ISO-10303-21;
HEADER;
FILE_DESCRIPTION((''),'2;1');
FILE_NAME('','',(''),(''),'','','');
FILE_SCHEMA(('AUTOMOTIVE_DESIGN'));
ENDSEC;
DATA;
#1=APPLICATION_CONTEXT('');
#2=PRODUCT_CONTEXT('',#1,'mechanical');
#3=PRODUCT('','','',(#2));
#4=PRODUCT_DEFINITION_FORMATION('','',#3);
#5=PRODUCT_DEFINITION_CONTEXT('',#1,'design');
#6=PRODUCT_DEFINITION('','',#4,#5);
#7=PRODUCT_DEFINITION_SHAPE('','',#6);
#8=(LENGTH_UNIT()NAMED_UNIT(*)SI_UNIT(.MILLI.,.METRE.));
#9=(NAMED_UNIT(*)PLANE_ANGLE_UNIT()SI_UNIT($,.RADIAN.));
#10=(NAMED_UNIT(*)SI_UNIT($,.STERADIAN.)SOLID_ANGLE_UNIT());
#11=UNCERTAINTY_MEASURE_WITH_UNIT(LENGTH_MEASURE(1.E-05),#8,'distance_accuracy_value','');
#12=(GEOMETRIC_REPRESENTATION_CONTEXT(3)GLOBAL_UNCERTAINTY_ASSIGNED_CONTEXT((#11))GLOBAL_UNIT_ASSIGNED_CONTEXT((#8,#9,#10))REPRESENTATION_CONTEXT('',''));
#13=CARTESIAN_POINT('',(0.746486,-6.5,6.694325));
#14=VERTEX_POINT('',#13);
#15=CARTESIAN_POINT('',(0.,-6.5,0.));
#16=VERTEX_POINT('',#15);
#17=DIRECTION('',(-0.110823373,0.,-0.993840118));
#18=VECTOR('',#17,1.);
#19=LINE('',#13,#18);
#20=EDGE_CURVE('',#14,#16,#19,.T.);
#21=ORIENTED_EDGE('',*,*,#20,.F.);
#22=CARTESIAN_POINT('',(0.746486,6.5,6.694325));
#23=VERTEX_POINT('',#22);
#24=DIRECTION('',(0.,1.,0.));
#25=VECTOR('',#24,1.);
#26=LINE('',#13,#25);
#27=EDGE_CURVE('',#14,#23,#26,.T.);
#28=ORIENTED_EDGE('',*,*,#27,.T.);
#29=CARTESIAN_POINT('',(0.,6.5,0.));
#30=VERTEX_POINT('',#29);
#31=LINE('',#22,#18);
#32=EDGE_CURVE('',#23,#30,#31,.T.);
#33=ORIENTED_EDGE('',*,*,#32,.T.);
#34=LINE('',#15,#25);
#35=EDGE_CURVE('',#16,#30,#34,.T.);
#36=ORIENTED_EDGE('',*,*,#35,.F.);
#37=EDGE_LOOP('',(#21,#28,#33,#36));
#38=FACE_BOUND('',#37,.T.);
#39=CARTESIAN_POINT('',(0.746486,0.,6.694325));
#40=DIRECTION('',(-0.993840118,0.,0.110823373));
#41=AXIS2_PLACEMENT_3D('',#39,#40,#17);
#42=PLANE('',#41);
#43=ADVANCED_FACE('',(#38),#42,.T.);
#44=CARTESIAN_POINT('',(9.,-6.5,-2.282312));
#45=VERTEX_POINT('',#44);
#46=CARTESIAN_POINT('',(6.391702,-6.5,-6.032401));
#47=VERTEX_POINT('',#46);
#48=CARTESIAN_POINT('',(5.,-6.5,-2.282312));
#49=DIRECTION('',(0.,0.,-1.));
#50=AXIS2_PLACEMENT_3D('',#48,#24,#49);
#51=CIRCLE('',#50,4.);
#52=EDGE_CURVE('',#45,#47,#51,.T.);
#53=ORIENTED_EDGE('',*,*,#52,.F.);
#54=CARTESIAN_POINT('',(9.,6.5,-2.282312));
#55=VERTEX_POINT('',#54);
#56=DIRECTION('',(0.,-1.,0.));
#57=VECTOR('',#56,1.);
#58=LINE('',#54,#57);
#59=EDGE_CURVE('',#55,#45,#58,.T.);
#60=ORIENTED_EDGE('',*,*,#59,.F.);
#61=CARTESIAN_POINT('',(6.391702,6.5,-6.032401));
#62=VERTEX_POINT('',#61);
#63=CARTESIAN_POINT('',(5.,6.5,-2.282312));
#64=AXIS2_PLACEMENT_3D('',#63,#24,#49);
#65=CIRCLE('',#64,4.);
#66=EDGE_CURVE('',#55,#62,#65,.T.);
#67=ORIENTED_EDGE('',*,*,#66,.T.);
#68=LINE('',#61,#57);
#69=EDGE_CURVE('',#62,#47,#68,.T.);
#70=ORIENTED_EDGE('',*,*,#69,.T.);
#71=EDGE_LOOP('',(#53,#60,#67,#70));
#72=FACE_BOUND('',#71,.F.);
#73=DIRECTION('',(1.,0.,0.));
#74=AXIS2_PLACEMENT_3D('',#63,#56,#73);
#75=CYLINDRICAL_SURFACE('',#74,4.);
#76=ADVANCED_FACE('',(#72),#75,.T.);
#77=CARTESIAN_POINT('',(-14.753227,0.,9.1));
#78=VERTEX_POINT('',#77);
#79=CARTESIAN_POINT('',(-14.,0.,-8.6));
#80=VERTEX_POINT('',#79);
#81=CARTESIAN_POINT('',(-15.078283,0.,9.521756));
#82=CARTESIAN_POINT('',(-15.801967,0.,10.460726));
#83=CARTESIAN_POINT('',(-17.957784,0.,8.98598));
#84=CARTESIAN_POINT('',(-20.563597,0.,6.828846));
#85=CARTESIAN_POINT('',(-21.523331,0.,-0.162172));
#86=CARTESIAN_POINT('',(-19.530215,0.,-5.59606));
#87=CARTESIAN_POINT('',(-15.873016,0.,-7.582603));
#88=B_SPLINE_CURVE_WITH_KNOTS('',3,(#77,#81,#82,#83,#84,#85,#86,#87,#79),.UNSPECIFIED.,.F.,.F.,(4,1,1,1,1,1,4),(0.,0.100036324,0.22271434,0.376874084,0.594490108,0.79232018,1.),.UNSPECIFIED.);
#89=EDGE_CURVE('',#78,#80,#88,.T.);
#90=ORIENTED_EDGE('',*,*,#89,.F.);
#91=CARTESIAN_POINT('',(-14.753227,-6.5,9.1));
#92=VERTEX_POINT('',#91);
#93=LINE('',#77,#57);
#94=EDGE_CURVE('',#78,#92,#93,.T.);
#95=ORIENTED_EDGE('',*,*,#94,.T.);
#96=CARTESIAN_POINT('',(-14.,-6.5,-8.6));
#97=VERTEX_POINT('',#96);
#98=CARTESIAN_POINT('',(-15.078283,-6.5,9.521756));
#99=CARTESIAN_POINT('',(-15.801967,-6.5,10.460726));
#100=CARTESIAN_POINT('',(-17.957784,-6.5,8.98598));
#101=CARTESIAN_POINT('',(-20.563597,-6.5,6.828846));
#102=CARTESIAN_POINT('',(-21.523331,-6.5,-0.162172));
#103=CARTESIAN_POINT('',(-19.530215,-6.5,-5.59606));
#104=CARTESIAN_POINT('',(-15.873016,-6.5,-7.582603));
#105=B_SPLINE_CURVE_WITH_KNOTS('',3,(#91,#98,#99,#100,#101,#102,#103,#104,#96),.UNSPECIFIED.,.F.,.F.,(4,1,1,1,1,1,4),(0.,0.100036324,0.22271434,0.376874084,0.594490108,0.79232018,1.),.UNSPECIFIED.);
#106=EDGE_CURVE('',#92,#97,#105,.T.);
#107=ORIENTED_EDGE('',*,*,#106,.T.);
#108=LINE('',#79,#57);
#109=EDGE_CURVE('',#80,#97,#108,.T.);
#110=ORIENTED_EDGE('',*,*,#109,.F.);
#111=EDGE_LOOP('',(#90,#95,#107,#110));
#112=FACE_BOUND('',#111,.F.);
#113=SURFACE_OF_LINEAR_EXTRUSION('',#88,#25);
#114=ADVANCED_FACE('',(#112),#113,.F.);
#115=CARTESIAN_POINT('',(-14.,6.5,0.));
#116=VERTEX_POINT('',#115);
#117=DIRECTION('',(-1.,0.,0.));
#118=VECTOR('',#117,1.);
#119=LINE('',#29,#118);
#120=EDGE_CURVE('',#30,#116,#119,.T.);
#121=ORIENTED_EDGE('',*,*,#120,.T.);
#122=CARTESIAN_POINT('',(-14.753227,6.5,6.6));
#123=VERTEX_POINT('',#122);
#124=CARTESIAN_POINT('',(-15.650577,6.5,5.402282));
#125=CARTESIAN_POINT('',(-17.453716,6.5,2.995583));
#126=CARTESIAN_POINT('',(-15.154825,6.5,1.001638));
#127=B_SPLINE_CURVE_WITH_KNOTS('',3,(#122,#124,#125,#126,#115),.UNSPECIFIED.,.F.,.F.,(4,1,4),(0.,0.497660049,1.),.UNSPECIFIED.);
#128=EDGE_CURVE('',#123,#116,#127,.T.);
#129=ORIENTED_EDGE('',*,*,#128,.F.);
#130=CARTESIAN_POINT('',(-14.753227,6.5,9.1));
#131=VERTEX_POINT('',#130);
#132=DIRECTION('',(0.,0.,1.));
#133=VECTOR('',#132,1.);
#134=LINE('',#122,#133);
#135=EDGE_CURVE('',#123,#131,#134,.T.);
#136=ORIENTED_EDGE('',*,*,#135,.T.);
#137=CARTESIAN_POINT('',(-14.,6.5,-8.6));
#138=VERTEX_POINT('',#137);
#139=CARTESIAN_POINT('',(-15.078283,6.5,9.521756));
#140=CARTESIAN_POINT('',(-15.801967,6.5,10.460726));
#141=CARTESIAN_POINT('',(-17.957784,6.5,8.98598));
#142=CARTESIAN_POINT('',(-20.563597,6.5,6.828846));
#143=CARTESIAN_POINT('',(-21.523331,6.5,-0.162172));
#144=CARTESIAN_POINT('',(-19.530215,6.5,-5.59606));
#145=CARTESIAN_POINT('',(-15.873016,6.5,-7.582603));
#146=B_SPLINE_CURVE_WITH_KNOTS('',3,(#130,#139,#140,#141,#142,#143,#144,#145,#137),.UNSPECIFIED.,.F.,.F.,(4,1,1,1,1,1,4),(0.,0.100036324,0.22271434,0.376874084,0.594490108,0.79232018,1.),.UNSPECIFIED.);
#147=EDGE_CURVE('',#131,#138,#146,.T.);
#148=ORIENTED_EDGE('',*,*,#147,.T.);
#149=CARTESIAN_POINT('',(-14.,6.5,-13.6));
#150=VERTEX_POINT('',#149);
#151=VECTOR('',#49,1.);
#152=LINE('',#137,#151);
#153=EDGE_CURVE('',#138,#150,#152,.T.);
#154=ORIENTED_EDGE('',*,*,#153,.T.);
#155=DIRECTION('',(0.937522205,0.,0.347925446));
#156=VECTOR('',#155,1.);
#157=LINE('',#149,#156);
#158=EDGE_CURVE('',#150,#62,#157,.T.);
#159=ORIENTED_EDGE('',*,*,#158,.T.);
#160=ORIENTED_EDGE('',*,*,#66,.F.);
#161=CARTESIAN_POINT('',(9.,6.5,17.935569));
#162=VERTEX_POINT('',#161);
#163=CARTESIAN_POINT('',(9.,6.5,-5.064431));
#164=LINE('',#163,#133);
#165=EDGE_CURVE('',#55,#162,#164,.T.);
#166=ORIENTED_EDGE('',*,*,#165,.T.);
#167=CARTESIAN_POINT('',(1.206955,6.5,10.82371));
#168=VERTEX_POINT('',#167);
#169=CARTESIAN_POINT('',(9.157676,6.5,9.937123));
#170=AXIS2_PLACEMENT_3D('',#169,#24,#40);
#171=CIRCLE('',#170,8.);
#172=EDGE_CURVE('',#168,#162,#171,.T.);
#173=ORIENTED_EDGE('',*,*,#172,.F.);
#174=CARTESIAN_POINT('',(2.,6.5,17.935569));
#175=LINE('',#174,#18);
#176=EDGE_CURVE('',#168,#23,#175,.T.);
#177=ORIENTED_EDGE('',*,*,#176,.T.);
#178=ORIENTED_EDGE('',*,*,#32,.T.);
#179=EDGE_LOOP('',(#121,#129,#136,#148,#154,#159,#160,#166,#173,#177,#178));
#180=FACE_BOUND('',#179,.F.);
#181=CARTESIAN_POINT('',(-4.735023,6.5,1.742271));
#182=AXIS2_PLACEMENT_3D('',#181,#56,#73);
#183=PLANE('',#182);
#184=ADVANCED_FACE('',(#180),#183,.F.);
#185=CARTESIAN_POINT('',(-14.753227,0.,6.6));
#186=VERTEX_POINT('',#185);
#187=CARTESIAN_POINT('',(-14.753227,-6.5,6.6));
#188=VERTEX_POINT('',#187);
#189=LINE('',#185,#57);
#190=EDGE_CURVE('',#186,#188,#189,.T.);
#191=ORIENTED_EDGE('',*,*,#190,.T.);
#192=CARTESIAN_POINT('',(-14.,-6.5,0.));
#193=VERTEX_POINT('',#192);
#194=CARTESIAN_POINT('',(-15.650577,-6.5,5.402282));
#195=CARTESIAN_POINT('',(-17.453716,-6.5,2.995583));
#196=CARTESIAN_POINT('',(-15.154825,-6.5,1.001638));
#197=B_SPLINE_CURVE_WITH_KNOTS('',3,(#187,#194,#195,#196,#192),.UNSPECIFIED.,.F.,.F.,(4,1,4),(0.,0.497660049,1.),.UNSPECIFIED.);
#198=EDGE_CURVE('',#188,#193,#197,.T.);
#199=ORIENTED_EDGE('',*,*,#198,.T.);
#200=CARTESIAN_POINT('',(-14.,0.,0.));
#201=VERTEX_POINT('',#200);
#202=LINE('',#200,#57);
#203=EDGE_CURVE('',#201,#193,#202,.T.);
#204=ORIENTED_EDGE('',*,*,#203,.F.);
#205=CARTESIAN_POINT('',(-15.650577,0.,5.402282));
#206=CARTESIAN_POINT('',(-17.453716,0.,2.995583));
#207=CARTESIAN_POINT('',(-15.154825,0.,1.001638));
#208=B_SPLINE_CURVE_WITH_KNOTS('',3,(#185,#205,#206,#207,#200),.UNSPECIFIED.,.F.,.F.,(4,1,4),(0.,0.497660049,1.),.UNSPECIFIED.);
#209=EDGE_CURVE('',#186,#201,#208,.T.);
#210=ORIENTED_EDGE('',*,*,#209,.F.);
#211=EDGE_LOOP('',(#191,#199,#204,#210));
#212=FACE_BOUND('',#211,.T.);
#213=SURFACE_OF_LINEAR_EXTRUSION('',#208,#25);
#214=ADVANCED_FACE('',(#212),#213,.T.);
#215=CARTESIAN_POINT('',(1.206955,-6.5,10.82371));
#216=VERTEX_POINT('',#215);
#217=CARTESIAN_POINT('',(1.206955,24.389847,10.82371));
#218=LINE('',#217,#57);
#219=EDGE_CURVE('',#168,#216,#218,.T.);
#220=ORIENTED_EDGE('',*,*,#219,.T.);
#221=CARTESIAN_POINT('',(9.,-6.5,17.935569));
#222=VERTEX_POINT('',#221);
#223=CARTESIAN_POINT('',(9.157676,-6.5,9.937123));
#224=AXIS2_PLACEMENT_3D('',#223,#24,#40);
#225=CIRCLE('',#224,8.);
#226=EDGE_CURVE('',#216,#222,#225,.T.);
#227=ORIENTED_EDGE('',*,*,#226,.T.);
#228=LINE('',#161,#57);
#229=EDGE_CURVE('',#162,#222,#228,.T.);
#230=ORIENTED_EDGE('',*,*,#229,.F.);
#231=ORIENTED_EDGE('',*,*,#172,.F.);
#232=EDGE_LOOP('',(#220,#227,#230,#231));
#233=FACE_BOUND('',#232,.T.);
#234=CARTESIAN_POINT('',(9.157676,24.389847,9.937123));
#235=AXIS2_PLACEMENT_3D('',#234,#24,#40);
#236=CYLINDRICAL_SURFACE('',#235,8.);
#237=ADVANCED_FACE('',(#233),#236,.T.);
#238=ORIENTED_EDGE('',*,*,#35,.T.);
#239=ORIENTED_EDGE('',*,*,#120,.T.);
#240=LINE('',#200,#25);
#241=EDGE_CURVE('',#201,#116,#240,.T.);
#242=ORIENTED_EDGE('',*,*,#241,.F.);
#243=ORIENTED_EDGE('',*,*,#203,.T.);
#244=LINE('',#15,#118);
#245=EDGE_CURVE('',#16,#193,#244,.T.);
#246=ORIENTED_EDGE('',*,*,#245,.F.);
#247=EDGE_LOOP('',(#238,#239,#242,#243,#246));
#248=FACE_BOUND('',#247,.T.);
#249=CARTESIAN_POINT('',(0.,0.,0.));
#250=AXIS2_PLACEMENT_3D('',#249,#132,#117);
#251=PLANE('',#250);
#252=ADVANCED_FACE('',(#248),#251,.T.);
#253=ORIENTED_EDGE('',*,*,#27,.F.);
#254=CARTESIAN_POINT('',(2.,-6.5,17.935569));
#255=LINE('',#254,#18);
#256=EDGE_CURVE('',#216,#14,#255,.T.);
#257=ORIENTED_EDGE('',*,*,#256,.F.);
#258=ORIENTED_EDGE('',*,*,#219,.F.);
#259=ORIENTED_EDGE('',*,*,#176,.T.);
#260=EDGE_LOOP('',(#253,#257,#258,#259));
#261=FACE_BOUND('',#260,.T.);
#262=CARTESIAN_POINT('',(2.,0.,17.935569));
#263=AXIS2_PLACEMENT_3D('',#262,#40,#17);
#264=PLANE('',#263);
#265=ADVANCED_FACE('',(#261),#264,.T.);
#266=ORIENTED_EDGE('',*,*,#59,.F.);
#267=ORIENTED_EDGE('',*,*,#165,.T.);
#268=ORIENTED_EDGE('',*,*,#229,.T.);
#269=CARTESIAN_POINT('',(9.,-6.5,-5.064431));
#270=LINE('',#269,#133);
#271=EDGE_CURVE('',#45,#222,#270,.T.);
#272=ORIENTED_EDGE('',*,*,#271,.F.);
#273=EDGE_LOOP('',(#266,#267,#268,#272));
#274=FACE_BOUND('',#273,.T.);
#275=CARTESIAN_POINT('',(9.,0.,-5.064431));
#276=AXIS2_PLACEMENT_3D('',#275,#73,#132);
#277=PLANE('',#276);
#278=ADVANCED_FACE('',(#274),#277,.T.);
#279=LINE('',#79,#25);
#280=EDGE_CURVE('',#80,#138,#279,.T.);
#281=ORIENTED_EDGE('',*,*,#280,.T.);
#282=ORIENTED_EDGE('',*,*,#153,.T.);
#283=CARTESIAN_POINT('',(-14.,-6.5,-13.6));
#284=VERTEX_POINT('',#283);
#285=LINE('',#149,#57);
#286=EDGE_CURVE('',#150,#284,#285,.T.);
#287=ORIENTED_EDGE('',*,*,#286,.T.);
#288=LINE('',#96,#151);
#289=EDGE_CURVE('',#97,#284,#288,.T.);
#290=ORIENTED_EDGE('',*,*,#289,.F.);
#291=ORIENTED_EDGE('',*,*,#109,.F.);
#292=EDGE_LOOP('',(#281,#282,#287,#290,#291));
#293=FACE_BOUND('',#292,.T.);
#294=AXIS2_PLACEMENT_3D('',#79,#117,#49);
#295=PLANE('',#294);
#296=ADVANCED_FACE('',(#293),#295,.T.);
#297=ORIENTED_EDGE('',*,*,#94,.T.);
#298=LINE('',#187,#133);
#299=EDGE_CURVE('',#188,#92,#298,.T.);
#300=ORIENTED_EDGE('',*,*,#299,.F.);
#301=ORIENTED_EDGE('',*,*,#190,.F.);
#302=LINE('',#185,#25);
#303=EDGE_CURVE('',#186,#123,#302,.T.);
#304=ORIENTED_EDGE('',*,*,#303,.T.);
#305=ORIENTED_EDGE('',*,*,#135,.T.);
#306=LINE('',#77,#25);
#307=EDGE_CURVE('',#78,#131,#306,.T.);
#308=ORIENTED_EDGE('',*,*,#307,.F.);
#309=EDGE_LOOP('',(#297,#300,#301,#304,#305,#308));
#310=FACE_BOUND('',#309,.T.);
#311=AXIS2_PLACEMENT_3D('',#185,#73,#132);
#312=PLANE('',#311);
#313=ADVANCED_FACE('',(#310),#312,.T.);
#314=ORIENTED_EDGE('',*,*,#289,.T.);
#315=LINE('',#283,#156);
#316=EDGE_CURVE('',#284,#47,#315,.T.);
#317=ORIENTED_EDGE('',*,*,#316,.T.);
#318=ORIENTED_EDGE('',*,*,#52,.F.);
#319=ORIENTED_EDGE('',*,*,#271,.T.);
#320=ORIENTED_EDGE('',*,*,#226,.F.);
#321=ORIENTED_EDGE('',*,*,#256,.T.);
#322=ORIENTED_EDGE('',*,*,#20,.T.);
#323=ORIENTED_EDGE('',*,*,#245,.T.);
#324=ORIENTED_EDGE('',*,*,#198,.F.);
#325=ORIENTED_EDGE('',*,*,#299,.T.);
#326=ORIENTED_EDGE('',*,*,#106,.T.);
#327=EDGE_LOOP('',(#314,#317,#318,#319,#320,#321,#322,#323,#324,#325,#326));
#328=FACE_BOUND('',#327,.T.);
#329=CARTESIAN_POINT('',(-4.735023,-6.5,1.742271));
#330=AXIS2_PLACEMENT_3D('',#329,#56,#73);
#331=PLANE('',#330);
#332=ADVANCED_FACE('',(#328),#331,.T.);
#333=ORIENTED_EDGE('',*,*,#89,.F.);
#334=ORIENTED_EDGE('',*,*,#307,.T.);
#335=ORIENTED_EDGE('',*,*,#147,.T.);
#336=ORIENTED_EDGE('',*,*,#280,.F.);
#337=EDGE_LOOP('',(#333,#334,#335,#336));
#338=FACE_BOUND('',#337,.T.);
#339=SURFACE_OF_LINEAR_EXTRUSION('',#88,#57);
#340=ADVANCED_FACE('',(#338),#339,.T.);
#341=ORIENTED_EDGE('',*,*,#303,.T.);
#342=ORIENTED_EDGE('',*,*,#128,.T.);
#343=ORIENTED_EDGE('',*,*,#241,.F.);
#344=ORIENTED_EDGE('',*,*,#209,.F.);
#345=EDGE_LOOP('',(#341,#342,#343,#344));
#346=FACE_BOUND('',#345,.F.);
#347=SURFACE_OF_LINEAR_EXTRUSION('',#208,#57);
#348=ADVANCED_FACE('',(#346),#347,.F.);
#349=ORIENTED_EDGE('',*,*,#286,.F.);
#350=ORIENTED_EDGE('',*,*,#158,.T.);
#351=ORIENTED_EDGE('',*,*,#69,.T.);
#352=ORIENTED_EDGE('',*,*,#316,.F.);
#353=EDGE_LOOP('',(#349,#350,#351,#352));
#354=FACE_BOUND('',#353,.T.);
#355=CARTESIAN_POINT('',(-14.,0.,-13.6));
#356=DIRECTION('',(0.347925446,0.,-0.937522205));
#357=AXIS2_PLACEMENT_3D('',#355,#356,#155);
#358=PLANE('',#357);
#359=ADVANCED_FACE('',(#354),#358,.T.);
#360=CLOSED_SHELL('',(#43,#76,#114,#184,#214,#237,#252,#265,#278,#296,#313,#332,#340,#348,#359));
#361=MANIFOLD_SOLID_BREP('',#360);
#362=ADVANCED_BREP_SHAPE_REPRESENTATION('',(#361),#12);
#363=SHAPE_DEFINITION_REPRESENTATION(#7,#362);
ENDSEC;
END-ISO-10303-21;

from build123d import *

# Parameters (mm, degrees)
F1_DEPTH    = 6.5
F2_T1_DEPTH = 48.7796937487
F3_R        = 4


# Not quite as in the source:
# - a fillet or chamfer that OpenCascade refuses, or shapes differently, is made with other operations: its cross-section is extruded or revolved along the edge and cut away or added


with BuildPart() as f1:
    # F0 (on Front) → F1 (new body, symmetric)
    with BuildSketch(Plane.XZ):
        with BuildLine():
            Line((0, 0), (-14, 0))
            add(Edge.make_bspline(
                [(-14.753227005, 6.6), (-15.6505771516, 5.402281958), (-17.4537159579, 2.9955827572), (-15.1548248478, 1.0016380744), (-14, 0)],
                knots=[0, 0, 0, 0, 0.4976600489, 1, 1, 1, 1], degree=3))
            Line((-14.753227005, 6.6), (-14.753227005, 9.1))
            add(Edge.make_bspline(
                [(-14.753227005, 9.1), (-15.0782830968, 9.5217558402), (-15.8019667592, 10.4607255098), (-17.9577835755, 8.9859803429), (-20.5635971664, 6.8288464563), (-21.5233314219, -0.162172448), (-19.5302154879, -5.5960603901), (-15.8730160291, -7.5826025673), (-14, -8.6)],
                knots=[0, 0, 0, 0, 0.1000363237, 0.2227143405, 0.3768740844, 0.5944901084, 0.7923201796, 1, 1, 1, 1], degree=3))
            Line((-14, -8.6), (-14, -13.6))
            Line((-14, -13.6), (9, -5.0644312273))
            Line((9, -5.0644312273), (9, 17.9355687727))
            Line((9, 17.9355687727), (2, 17.9355687727))
            Line((2, 17.9355687727), (0.7464859836, 6.6943253484))
            Line((0.7464859836, 6.6943253484), (0.3732429918, 3.3471626742))
            Line((0.3732429918, 3.3471626742), (0, 0))
        make_face()
    extrude(amount=F1_DEPTH, both=True)

    # F2: fillet of radius 8 on 1 edges, made by hand

    # F2_s2 → F2_t1 (cut)
    with BuildSketch(Plane.XZ.offset(-24.3898468744)):
        with BuildLine():
            ThreePointArc((1.2069547277, 10.8237097622), (3.7649807454, 15.8463394269), (9, 17.9355687727))
            Line((9, 17.9355687727), (2, 17.9355687727))
            Line((2, 17.9355687727), (1.2069547277, 10.8237097622))
        make_face()
    extrude(amount=F2_T1_DEPTH, mode=Mode.SUBTRACT)

    # F3
    f3_edges = [f1.edges().sort_by_distance(p)[0] for p in [
        (9, 0, -5.064431),
    ]]
    fillet(f3_edges, radius=F3_R)


solid = f1.part
